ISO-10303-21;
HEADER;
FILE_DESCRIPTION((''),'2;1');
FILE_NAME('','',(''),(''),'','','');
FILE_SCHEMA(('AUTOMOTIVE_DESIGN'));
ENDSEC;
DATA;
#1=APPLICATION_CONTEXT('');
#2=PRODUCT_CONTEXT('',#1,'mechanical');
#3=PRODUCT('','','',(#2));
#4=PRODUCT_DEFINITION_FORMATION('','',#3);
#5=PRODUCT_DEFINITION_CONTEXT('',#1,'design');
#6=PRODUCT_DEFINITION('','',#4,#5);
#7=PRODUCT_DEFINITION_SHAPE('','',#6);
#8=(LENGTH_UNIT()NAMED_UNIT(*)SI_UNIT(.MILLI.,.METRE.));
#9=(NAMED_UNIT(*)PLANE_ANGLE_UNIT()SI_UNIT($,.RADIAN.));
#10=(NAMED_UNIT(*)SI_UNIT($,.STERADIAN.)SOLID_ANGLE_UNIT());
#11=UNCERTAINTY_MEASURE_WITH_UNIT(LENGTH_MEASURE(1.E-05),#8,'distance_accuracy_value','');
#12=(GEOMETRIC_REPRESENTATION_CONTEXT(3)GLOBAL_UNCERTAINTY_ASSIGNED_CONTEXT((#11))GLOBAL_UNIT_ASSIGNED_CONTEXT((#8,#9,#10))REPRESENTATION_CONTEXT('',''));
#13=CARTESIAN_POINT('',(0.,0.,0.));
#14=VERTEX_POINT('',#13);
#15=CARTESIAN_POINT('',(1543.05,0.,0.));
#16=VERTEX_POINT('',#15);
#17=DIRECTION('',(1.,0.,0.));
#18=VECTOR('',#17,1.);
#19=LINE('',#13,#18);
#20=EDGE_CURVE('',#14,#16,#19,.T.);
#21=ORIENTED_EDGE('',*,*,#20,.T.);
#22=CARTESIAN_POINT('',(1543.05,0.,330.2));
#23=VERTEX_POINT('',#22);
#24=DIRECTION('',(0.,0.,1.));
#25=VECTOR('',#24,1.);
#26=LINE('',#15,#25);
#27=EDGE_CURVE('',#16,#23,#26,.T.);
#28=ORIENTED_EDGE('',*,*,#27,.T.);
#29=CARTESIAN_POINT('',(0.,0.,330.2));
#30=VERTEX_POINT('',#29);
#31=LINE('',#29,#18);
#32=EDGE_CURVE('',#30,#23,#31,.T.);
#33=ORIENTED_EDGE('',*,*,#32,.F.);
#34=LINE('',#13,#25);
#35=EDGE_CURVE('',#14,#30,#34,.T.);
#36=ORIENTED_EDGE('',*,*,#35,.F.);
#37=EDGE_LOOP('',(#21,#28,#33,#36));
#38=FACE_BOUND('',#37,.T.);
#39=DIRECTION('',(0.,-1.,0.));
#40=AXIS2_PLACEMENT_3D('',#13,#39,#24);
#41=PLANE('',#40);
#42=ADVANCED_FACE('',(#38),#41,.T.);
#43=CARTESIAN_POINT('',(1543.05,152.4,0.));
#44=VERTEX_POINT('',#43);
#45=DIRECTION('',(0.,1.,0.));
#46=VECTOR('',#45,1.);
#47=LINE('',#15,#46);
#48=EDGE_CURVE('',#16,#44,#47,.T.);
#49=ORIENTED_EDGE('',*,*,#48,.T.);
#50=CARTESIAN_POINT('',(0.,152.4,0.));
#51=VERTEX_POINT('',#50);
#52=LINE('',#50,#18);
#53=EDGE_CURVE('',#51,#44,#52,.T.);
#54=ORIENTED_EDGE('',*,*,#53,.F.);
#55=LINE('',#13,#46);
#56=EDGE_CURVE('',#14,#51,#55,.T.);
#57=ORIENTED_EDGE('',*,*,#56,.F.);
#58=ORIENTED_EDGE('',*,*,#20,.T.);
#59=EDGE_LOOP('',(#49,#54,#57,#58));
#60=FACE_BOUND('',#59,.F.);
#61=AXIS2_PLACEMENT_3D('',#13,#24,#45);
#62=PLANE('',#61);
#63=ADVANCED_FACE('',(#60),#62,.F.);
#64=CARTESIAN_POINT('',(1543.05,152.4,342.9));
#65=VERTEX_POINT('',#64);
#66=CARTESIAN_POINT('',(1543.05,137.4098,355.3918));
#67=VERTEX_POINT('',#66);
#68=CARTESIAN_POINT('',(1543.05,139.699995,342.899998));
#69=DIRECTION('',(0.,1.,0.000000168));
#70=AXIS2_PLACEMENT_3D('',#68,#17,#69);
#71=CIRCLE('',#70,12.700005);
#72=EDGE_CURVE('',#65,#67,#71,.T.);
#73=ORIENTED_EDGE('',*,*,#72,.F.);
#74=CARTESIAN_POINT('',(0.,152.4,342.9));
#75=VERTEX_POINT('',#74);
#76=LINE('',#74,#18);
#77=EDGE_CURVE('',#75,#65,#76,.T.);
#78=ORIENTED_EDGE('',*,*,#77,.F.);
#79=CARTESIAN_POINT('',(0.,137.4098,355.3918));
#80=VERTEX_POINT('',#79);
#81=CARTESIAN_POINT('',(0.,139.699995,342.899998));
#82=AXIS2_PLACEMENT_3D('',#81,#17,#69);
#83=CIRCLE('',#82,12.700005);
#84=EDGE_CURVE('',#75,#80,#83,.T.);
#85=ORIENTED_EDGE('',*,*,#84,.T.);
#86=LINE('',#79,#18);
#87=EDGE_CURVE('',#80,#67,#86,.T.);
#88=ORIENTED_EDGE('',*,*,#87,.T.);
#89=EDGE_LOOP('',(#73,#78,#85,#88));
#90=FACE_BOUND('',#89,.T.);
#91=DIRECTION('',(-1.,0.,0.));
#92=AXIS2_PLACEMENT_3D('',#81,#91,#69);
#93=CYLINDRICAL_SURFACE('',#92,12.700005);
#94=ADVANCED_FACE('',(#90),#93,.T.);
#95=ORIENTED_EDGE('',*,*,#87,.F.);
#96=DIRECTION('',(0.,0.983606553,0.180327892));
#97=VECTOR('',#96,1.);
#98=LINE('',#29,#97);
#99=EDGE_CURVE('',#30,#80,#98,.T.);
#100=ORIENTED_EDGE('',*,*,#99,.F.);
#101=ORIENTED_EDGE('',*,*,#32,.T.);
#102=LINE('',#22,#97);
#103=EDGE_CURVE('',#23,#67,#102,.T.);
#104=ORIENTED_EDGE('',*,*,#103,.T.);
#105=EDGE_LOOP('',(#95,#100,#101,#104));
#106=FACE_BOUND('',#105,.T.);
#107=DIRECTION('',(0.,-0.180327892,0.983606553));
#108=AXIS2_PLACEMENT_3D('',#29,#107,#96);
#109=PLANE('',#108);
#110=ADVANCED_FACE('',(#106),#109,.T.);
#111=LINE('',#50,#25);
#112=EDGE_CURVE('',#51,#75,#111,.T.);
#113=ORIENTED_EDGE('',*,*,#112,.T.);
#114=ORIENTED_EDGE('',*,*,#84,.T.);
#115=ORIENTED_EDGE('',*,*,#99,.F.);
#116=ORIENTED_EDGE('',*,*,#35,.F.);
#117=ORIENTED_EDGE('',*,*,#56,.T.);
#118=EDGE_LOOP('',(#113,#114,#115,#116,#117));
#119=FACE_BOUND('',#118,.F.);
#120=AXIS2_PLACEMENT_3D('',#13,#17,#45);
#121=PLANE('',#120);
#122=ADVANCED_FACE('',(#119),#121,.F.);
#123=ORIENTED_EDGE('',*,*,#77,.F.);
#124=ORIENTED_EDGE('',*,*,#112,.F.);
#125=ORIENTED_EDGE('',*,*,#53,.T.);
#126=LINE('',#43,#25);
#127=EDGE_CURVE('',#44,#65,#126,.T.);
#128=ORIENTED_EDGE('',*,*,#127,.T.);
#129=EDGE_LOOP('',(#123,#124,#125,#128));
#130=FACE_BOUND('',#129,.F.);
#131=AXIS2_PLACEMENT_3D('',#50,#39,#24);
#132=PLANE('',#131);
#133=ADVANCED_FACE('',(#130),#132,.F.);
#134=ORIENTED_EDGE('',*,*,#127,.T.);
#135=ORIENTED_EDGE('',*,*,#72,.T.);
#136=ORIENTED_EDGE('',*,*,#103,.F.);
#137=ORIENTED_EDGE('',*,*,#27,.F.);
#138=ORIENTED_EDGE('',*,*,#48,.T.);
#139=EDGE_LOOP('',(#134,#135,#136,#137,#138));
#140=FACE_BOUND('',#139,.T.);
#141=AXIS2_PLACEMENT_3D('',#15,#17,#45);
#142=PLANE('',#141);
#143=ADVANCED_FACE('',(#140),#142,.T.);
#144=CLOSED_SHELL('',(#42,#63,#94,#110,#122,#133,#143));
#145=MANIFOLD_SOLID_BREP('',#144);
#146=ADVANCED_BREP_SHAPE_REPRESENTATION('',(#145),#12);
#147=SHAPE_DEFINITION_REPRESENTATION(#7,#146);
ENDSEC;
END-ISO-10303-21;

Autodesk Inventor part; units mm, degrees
ref_plane "YZ Plane" through (0, 0, 0) normal (1, 0, 0) x (0, 1, 0)
ref_plane "XZ Plane" through (0, 0, 0) normal (0, 1, 0) x (-1, 0, 0)
ref_plane "XY Plane" through (0, 0, 0) normal (0, 0, 1) x (1, 0, 0)
sketch "Profile" plane through (0, 0, 0) normal (0, 0, 1) x (1, 0, 0)
  line L0 (0, 0) -> (0, 330.2)
  line L1 (0, 0) -> (152.4, 0)
  line L2 (152.4, 0) -> (152.4, 342.9)
  line L3 (152.4, 342.9) -> (139.7, 342.9) construction
  line L4 (152.4, 342.9) -> (139.7, 342.9) construction
  arc A0 (152.4, 342.9) -> (137.4098, 355.3918) centre (139.7, 342.9) ccw
  line L5 (0, 330.2) -> (137.4098, 355.3918)
  dimension "d0" = 330.2
  dimension "d1" = 152.4
  dimension "d2" = 342.9
  dimension "d3" = 12.7
  dimension "d4" = 12.7
sketch "Sketch1" plane through (0, 0, 0) normal (1, 0, 0) x (0, 1, 0)
  line L0 (0, 0) -> (0, 330.2)
  line L1 (0, 0) -> (152.4, 0)
  line L2 (152.4, 0) -> (152.4, 342.9)
  line L3 (152.4, 342.9) -> (139.7, 342.9) construction
  line L4 (152.4, 342.9) -> (139.7, 342.9) construction
  arc A0 (152.4, 342.9) -> (137.4098, 355.3918) centre (139.7, 342.9) ccw
  line L5 (0, 330.2) -> (137.4098, 355.3918)
extrude "Extrusion1" add sketch "Sketch1" along normal blind 1543.05
properties part number "N" material "Granite, Cut, Polished"
